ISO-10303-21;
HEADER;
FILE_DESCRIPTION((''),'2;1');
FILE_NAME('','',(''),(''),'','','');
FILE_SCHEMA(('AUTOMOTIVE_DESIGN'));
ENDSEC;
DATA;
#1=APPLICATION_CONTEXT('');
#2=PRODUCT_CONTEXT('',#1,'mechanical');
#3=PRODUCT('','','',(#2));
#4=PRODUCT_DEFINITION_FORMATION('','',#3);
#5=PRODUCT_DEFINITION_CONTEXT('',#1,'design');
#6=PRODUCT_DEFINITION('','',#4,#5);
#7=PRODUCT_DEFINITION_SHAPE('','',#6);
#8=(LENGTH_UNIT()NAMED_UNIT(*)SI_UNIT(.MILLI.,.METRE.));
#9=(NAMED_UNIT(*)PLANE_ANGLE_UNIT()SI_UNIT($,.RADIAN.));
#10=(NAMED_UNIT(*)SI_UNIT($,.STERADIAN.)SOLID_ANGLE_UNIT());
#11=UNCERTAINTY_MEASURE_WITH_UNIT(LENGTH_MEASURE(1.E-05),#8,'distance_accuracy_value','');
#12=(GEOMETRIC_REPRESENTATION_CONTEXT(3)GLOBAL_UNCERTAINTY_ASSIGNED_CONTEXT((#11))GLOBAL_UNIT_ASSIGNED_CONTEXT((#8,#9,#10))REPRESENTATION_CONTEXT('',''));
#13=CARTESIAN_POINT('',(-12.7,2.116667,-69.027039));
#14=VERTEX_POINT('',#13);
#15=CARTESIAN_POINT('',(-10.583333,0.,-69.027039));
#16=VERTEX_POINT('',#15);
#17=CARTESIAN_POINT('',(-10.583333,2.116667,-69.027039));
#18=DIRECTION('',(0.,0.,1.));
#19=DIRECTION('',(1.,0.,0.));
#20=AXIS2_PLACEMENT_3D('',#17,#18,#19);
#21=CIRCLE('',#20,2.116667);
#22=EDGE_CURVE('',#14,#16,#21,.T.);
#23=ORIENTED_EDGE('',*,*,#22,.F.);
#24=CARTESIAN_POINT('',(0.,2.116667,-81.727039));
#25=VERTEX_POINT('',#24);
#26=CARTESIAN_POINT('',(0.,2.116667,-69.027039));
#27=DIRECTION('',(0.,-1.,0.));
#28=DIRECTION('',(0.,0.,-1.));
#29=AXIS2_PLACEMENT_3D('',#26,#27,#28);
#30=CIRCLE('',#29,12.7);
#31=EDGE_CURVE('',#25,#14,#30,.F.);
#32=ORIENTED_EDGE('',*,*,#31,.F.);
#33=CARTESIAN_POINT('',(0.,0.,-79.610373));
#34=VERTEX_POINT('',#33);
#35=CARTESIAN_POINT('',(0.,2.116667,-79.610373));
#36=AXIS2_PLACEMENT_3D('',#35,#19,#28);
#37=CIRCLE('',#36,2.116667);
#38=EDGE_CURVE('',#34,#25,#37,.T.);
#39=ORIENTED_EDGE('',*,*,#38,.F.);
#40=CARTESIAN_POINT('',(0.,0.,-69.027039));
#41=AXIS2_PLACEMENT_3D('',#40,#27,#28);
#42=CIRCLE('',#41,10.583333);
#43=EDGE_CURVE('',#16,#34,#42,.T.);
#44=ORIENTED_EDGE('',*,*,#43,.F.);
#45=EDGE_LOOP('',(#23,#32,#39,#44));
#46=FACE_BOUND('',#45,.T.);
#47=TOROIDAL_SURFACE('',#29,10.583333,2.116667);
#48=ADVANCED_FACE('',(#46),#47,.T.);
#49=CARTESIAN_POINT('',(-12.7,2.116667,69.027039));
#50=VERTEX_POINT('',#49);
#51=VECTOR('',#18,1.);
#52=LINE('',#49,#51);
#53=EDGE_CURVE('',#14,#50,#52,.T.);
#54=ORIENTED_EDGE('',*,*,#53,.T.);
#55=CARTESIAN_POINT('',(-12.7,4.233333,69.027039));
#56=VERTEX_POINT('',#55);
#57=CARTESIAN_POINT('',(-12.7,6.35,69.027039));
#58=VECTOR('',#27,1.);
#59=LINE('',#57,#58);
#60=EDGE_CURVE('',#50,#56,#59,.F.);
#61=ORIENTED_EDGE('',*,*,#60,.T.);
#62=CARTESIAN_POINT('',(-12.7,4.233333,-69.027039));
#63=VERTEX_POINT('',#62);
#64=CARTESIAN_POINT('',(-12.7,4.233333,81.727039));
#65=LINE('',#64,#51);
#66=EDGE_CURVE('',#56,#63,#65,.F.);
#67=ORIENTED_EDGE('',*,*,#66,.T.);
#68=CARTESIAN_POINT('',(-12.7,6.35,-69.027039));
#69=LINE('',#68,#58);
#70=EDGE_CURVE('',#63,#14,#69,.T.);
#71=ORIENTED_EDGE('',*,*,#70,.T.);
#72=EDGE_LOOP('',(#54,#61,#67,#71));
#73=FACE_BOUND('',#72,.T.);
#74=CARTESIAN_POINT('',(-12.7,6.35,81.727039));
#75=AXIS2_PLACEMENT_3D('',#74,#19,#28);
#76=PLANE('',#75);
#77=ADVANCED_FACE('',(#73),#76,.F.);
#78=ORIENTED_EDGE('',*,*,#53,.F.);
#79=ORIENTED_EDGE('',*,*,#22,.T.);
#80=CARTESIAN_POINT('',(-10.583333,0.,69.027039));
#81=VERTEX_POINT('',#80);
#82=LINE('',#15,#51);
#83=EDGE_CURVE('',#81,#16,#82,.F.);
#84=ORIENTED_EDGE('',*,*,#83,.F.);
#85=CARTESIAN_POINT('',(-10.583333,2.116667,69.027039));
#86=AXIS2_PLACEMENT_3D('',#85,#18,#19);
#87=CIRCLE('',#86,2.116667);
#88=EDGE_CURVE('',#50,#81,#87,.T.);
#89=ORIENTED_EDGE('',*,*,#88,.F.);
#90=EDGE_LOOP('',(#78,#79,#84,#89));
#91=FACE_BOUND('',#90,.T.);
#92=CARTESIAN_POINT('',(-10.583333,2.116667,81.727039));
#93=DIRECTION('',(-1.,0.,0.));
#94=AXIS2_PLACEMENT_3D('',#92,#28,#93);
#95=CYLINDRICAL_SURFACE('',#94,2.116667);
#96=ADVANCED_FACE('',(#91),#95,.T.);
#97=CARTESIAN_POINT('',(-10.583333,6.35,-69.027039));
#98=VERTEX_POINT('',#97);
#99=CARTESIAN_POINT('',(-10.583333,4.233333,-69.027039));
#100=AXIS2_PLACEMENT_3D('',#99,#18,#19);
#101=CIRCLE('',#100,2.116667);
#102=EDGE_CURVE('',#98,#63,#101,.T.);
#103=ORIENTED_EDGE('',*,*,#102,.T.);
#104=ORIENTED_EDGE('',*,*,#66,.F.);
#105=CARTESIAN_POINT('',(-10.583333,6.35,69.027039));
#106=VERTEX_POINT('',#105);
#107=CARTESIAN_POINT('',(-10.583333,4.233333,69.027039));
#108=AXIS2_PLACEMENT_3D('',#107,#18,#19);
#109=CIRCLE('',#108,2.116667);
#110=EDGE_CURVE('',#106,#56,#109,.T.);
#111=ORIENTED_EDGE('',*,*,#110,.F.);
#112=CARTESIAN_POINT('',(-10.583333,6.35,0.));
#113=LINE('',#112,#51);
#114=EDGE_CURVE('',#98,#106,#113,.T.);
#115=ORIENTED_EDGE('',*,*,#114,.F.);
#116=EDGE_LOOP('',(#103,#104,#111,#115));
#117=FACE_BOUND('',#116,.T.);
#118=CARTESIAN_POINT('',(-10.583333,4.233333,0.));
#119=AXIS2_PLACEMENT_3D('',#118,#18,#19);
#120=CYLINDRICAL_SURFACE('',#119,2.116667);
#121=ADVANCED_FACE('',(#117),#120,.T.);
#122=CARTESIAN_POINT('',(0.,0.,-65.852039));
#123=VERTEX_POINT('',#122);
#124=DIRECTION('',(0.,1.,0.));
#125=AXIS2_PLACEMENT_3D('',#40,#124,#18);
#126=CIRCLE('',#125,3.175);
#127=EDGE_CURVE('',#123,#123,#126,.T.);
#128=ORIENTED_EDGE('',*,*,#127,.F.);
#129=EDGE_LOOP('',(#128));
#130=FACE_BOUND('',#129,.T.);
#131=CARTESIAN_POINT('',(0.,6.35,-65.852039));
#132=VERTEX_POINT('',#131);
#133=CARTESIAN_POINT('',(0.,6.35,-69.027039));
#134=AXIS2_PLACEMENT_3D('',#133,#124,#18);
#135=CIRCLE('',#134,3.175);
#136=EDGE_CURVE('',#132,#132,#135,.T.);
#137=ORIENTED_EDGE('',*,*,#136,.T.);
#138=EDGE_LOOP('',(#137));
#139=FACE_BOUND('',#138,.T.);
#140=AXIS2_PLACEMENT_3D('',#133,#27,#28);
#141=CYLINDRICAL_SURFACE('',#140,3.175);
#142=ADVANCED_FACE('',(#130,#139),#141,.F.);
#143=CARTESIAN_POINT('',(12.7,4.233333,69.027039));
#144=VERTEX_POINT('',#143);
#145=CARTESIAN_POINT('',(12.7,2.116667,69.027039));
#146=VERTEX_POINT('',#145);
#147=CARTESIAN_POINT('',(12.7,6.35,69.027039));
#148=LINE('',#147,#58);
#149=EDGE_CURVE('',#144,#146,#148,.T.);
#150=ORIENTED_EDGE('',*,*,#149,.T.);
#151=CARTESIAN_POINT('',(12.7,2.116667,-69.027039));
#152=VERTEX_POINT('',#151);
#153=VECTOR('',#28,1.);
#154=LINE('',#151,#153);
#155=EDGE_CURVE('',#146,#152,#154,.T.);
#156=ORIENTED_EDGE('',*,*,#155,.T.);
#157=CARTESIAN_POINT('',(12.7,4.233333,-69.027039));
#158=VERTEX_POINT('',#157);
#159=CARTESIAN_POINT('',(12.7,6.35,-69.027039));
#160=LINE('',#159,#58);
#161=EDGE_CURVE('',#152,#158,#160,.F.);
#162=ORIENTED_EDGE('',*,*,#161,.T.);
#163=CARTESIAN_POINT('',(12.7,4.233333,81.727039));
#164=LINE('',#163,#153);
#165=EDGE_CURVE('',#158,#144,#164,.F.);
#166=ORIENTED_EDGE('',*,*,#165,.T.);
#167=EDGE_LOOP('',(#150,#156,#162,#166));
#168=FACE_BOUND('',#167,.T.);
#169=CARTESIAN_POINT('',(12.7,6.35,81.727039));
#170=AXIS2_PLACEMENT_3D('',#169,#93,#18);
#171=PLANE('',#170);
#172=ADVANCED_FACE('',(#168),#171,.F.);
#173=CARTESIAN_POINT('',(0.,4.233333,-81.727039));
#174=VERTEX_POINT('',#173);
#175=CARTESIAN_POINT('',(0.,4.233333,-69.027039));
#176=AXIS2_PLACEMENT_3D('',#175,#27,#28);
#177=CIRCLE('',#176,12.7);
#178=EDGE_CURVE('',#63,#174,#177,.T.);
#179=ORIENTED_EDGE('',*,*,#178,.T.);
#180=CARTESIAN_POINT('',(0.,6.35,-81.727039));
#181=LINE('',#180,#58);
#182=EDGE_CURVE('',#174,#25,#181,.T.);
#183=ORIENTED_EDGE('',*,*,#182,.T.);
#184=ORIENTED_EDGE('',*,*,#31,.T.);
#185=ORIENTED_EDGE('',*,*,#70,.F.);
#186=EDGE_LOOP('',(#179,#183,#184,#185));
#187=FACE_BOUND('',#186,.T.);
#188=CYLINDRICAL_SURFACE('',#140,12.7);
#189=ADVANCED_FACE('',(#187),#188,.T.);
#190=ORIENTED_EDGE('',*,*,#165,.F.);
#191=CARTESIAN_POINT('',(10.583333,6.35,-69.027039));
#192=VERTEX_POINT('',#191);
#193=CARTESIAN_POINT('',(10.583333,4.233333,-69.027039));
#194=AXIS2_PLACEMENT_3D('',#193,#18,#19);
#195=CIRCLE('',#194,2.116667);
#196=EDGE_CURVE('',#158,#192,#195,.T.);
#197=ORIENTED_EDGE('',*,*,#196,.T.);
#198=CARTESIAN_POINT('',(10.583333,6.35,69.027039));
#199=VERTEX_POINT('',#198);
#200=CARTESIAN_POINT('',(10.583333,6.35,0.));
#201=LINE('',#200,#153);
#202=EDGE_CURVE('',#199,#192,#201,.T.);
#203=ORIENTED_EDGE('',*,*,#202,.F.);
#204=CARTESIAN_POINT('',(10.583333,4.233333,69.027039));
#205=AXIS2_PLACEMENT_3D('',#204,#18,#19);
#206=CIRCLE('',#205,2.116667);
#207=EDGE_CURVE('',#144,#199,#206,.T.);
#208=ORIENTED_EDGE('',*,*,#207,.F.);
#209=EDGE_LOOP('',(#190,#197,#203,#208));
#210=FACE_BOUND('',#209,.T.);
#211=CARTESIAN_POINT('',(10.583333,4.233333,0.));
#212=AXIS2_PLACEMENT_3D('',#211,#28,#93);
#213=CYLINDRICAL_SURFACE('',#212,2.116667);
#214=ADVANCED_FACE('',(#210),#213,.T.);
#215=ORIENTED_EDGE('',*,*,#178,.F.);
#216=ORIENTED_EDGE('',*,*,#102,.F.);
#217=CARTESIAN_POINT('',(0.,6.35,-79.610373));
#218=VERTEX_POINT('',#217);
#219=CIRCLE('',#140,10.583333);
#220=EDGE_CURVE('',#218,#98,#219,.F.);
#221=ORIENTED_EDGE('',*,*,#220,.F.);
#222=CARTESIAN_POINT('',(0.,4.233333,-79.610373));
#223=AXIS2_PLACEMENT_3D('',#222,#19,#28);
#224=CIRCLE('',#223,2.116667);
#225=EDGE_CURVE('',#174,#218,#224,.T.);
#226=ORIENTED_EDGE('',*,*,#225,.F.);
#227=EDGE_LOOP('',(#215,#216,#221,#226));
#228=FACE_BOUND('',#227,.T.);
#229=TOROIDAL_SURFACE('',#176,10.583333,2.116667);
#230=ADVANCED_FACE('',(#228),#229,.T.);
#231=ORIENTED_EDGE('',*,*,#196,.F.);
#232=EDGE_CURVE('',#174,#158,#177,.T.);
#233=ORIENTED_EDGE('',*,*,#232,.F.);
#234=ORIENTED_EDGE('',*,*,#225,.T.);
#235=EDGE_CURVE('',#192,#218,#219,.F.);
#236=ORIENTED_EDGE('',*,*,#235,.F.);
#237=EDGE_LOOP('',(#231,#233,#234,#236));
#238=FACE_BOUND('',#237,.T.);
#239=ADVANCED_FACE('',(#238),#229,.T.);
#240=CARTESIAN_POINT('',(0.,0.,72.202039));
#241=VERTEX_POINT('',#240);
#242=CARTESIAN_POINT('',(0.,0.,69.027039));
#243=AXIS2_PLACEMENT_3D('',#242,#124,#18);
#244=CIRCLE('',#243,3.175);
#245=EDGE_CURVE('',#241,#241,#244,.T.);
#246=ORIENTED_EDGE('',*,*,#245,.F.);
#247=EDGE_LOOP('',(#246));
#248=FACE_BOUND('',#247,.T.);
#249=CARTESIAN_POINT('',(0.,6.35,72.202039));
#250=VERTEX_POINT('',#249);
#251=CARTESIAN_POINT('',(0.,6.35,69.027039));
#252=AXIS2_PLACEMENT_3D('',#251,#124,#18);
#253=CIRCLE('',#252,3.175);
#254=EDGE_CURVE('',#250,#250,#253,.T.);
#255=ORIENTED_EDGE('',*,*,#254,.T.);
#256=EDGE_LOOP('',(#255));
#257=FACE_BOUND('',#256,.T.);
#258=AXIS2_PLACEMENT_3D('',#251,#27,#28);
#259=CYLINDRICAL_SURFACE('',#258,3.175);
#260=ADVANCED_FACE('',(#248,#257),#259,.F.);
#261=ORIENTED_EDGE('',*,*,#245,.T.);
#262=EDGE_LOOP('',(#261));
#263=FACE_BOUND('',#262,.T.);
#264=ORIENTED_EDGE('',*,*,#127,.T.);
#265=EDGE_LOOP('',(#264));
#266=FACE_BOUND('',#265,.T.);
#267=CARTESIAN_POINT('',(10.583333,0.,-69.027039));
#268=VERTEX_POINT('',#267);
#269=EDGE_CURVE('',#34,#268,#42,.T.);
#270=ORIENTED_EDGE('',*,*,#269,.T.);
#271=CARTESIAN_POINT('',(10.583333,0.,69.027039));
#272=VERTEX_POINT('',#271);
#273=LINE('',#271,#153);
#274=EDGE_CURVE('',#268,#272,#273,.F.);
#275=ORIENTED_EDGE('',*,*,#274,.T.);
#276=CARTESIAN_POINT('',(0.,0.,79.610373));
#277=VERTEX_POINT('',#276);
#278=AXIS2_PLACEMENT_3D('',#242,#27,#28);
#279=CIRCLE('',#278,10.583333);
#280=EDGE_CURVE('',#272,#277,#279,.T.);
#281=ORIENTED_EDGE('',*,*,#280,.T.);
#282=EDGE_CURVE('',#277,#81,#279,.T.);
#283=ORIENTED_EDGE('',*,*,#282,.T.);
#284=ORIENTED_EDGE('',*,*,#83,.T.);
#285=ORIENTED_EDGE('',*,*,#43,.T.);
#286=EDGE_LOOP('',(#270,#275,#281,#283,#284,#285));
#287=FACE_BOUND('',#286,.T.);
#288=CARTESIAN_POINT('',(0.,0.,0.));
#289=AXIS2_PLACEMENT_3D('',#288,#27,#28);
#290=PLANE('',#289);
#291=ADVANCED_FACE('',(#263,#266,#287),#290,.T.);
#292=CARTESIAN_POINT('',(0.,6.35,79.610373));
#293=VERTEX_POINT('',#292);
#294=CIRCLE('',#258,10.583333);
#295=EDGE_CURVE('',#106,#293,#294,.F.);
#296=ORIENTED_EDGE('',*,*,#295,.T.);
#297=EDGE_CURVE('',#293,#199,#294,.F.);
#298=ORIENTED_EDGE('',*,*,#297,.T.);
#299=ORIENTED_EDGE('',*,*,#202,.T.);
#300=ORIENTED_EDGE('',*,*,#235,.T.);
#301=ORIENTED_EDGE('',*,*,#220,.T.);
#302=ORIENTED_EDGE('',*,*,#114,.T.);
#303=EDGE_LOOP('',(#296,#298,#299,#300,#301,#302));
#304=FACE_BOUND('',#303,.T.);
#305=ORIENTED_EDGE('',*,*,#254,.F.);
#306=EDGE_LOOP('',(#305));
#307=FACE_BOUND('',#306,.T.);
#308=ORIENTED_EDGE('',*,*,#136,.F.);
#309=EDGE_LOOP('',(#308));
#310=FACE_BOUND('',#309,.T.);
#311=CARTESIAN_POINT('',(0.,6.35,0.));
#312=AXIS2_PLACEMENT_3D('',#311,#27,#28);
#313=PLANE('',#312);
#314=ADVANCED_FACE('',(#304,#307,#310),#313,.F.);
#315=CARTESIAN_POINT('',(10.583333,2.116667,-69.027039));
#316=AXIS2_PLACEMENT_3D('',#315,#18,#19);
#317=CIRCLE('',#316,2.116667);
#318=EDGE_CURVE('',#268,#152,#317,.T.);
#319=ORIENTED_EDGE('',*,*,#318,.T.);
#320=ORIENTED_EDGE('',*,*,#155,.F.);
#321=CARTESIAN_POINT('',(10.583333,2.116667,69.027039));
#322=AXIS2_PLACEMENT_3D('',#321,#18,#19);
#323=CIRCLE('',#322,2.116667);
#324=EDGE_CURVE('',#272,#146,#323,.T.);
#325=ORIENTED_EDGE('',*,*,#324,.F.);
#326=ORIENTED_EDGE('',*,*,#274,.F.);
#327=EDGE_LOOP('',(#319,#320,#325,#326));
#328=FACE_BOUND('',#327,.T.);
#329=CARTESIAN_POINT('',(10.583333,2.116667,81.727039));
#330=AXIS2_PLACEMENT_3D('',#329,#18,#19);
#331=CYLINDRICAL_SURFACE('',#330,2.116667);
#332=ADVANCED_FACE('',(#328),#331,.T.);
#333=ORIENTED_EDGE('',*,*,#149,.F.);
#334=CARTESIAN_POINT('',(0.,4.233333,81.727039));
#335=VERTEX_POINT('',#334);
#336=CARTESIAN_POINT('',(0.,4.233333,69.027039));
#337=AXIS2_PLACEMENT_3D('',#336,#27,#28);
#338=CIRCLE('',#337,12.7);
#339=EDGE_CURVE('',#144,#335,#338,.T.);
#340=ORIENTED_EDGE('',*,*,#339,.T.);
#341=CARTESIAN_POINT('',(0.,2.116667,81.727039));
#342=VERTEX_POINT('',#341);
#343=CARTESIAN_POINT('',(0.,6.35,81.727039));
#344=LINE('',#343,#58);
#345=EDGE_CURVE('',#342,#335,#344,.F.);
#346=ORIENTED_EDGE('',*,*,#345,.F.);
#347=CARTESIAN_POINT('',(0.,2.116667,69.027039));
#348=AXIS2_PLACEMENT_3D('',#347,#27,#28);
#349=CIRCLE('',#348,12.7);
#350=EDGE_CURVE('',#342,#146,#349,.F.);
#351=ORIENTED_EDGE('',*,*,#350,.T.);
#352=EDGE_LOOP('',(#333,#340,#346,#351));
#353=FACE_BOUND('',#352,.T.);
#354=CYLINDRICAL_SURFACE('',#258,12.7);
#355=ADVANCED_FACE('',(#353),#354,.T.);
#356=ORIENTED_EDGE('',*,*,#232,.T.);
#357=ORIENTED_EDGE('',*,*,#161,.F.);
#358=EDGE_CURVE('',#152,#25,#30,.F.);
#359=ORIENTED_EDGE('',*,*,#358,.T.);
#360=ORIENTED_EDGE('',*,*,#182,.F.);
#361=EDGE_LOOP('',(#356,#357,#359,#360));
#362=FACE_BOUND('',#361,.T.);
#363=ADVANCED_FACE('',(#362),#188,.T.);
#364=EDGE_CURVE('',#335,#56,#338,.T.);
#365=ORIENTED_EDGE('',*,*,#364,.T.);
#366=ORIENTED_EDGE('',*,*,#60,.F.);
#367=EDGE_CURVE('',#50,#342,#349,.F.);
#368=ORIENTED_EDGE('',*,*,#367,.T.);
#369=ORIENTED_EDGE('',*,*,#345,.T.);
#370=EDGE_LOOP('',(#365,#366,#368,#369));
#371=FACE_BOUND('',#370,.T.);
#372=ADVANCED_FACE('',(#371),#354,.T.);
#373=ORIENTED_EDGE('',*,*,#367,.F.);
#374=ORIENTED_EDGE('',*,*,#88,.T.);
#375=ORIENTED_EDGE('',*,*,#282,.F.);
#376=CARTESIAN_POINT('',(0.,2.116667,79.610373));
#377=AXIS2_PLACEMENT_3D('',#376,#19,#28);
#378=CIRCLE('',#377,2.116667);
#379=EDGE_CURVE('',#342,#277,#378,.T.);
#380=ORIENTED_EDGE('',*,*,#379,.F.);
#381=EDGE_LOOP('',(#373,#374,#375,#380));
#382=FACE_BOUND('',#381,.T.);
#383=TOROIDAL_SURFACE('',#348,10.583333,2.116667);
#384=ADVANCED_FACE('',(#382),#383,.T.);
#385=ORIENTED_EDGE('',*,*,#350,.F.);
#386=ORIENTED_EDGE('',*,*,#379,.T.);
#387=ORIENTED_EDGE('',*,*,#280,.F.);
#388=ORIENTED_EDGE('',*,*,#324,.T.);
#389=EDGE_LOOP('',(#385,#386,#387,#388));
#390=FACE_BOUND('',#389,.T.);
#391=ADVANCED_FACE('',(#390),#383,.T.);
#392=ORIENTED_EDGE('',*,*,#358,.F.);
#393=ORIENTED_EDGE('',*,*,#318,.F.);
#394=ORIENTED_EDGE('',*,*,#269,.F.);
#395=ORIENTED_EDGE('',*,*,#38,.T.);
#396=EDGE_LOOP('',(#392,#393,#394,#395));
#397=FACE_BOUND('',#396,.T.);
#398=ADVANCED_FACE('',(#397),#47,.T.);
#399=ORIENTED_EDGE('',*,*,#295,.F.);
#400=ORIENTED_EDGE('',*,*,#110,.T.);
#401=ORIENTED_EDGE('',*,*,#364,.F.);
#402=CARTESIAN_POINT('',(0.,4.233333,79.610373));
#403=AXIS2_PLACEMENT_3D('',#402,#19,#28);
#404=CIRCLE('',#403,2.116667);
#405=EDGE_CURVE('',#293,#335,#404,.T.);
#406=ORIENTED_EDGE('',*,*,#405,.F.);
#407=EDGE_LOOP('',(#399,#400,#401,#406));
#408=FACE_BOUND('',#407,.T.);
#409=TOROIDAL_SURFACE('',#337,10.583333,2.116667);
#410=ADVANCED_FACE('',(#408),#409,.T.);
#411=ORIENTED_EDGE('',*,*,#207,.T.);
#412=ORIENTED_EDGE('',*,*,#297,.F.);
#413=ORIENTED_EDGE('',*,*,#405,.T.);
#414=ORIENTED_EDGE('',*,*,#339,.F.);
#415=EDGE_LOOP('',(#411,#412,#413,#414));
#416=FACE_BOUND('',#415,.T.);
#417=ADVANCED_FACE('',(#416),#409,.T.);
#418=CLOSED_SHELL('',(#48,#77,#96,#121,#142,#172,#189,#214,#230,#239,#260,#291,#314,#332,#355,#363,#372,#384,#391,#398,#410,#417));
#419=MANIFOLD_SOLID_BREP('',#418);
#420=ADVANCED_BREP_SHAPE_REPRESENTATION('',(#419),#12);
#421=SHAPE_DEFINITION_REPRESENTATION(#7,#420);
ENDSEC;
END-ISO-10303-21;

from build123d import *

# Parameters (mm, degrees)
SKETCH1_W           = 25.4
SKETCH1_H           = 163.454078658
SKETCH1_R           = 3.175
BOSS_EXTRUDE1_DEPTH = 6.35
FILLET2_R           = 12.7
FILLET3_R           = 2.116666667


with BuildPart() as part:
    # Sketch1 → Boss-Extrude1 (new body)
    with BuildSketch(Plane(origin=(0, 0, 0), x_dir=(1, 0, 0), z_dir=(0, 1, 0))):
        Rectangle(SKETCH1_W, SKETCH1_H)
        with Locations(Location((0, -69.027039329, 0), (0, 0, 270))):
            Circle(SKETCH1_R, mode=Mode.SUBTRACT)
        with Locations(Location((0, 69.027039329, 0), (0, 0, 270))):
            Circle(SKETCH1_R, mode=Mode.SUBTRACT)
    extrude(amount=BOSS_EXTRUDE1_DEPTH)

    # Fillet2
    fillet2_edges = [part.edges().sort_by_distance(p)[0] for p in [
        (-12.7, 3.175, -81.727039329),
        (12.7, 3.175, -81.727039329),
        (-12.7, 3.175, 81.727039329),
        (12.7, 3.175, 81.727039329),
    ]]
    fillet(fillet2_edges, radius=FILLET2_R - 0.0001)  # a hair under: the kernel refuses the full size

    # Fillet3
    fillet3_edges = [part.edges().sort_by_distance(p)[0] for p in [
        (-12.7, 0, 0),
        (-12.7, 6.35, 0),
        (12.7, 0, 0),
        (8.98028541, 0, 78.007324739),
        (-8.98028541, 0, 78.007324739),
        (8.98028541, 0, -78.007324739),
        (-8.98028541, 0, -78.007324739),
        (12.7, 6.35, 0),
        (8.98028541, 6.35, 78.007324739),
        (-8.98028541, 6.35, 78.007324739),
        (8.98028541, 6.35, -78.007324739),
        (-8.98028541, 6.35, -78.007324739),
    ]]
    fillet(fillet3_edges, radius=FILLET3_R)


solid = part.part
